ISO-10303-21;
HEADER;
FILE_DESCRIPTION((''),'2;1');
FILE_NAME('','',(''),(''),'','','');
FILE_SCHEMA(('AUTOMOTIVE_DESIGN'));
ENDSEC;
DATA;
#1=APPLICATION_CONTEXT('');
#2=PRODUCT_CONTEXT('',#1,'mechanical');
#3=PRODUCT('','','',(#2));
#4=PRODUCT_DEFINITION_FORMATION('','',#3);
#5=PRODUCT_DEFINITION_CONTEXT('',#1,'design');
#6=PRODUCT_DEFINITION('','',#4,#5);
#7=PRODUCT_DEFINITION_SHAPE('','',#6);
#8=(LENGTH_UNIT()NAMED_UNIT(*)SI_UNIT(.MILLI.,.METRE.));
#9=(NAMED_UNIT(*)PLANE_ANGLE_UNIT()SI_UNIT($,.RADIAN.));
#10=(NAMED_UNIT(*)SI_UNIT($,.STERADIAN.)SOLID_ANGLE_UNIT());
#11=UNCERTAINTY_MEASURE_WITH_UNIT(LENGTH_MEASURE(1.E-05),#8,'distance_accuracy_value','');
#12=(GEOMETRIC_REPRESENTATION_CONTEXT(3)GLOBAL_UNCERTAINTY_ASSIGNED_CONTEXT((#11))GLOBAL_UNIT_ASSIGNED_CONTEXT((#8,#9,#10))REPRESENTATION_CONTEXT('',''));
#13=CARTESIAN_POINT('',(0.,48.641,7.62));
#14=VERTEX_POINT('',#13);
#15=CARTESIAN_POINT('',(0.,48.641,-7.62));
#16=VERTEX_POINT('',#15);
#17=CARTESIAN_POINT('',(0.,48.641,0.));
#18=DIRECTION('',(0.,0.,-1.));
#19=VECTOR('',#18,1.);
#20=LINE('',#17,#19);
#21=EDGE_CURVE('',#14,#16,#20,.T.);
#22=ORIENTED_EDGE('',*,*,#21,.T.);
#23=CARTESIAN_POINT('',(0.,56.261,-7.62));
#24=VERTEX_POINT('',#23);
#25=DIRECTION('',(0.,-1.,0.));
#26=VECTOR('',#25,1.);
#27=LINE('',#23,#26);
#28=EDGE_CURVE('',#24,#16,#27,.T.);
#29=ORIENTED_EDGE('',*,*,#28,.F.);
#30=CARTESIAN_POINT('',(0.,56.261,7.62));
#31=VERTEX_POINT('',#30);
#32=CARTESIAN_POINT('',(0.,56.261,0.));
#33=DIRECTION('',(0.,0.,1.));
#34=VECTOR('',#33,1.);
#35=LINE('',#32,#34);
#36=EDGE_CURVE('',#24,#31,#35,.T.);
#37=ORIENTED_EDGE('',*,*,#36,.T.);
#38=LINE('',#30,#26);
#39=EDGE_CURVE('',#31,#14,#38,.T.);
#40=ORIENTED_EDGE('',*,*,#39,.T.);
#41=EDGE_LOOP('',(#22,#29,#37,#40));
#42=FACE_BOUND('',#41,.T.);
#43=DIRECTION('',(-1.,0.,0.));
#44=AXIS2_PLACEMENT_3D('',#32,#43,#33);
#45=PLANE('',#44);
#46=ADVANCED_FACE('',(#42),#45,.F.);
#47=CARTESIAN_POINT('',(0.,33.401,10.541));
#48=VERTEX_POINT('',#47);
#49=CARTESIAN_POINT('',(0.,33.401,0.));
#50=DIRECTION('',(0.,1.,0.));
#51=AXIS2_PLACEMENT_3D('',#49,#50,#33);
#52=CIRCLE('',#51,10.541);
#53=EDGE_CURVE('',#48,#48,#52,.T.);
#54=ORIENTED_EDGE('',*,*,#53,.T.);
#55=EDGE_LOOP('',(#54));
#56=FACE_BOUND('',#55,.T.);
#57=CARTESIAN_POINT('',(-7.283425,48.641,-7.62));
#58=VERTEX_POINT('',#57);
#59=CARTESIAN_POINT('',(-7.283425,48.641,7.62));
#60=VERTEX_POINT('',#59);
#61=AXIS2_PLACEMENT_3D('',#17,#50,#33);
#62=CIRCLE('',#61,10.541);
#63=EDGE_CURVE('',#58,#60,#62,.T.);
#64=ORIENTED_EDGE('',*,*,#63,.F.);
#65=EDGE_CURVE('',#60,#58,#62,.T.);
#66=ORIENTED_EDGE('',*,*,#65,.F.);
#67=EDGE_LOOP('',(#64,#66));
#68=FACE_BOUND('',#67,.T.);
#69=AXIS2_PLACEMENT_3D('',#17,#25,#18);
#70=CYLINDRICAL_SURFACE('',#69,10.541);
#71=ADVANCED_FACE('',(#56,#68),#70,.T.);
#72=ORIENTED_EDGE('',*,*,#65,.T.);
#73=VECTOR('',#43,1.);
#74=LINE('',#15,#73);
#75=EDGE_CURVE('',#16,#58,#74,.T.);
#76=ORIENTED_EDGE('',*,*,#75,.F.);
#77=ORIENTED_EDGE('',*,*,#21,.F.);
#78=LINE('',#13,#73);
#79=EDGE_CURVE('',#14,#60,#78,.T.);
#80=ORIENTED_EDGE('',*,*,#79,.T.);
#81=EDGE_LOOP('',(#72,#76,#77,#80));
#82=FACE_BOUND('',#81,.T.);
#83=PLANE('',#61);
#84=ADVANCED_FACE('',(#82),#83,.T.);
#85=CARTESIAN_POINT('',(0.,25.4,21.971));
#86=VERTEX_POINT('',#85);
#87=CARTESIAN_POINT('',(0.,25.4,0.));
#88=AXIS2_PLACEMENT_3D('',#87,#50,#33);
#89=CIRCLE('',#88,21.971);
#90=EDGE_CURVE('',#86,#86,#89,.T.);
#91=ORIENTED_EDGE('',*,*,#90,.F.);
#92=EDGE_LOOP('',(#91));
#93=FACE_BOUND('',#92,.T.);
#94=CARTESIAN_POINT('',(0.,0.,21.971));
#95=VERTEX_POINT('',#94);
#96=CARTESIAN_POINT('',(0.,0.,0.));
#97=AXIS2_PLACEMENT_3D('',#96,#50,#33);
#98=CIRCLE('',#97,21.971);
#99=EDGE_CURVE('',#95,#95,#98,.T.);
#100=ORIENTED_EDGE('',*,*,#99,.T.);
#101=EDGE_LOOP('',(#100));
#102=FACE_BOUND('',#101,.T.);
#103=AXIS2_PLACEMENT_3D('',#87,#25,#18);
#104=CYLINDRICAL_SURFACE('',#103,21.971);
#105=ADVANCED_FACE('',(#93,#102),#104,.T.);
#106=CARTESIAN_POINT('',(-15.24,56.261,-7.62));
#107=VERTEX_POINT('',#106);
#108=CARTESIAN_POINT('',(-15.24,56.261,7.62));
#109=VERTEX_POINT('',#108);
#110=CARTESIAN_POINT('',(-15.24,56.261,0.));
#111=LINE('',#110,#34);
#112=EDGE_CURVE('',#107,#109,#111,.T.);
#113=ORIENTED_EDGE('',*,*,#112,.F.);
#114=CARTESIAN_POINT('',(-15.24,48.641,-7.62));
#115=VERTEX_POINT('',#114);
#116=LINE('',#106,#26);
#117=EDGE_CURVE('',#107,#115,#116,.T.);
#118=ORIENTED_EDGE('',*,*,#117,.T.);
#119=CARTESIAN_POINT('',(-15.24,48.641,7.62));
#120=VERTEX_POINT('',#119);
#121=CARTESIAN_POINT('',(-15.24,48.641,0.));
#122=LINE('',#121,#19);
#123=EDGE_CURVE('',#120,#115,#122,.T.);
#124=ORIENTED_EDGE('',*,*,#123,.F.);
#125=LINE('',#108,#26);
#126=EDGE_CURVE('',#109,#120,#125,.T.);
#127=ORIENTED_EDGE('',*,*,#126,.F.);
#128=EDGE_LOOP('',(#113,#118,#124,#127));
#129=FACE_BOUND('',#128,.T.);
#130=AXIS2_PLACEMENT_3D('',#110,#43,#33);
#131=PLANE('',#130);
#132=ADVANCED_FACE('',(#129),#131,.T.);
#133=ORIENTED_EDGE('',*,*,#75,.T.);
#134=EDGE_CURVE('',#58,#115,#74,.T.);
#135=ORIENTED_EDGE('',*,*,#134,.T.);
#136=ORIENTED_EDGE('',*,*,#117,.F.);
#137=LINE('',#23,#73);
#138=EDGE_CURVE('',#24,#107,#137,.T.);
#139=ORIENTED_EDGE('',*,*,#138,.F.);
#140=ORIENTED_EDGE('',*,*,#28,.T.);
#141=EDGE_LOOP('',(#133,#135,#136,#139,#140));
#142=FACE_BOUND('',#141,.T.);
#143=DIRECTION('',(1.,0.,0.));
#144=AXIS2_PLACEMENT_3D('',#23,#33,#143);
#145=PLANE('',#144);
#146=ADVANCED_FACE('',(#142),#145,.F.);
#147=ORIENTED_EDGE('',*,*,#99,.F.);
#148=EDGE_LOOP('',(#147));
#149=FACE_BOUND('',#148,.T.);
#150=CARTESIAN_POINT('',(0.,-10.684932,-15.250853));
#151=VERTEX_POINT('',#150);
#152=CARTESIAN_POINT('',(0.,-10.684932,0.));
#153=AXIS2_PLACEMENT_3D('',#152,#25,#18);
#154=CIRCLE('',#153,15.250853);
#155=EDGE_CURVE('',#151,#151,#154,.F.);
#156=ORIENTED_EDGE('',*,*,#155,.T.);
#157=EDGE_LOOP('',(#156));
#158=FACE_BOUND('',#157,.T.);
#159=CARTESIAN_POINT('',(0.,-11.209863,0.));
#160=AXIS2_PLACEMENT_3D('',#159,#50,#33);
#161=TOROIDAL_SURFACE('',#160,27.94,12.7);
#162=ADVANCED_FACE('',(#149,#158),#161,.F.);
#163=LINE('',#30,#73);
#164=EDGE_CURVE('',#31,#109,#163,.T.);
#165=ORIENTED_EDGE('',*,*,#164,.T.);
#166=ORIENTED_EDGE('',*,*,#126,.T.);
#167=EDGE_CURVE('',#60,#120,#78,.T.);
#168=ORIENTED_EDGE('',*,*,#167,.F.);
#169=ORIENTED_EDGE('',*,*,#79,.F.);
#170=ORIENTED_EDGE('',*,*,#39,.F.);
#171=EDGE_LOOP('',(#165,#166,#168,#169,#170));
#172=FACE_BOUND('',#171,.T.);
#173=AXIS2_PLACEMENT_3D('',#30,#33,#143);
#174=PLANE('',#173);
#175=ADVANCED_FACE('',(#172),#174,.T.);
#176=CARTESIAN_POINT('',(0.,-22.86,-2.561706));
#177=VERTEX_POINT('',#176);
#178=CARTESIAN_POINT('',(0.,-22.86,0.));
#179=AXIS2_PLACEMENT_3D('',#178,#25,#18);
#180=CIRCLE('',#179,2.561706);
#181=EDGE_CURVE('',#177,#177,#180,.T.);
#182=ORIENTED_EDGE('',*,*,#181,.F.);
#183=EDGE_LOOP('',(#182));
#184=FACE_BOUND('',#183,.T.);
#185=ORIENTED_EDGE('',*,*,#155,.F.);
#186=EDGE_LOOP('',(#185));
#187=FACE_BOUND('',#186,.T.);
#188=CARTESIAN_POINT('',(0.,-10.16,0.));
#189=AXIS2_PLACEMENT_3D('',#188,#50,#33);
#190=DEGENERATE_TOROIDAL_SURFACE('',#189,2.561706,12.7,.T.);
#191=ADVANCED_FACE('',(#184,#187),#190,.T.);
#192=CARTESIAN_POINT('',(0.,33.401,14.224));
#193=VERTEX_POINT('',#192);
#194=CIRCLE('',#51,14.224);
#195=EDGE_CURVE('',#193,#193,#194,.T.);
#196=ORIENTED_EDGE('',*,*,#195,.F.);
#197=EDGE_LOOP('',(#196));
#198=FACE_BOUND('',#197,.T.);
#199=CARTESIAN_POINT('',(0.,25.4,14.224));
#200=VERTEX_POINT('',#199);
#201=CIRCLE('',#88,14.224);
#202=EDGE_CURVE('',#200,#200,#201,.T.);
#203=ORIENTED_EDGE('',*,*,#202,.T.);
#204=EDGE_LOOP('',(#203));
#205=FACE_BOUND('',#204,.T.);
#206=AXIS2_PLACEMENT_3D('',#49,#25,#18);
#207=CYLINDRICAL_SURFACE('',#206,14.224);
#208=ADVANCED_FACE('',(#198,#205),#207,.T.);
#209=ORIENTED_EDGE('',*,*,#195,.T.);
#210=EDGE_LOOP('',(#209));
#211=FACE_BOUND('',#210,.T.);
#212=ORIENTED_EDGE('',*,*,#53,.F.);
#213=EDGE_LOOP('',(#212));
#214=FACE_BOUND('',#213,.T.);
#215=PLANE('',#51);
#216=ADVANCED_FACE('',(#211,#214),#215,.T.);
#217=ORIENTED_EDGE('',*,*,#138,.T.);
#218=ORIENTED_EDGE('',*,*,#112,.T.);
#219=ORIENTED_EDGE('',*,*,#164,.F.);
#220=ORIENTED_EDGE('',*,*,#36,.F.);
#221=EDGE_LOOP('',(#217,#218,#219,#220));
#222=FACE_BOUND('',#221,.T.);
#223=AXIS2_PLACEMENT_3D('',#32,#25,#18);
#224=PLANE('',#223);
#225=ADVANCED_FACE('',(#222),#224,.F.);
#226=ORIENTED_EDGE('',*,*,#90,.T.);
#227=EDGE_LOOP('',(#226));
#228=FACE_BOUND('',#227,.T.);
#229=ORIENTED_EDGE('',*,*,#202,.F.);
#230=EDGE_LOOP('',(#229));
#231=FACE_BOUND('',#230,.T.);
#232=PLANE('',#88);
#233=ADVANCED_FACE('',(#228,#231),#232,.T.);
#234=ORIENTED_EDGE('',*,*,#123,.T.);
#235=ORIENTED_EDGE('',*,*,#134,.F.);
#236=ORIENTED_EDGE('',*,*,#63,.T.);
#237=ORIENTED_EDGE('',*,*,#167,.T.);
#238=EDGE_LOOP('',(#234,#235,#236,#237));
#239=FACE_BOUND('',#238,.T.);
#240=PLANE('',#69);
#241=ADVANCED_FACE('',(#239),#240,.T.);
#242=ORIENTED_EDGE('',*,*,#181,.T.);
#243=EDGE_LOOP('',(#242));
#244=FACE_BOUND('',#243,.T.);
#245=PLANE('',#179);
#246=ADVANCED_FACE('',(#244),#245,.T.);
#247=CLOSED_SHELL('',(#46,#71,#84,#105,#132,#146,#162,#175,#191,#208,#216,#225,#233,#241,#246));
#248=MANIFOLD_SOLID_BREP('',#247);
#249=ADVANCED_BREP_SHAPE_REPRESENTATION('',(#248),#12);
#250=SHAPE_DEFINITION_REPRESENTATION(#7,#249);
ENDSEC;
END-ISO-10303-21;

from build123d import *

# Parameters (mm, degrees)
SKETCH1_R           = 21.971
BOSS_EXTRUDE1_DEPTH = 25.4
SKETCH2_R           = 14.224
BOSS_EXTRUDE2_DEPTH = 8.001
SKETCH3_R           = 10.541
BOSS_EXTRUDE3_DEPTH = 15.24
BOSS_EXTRUDE4_DEPTH = 7.62
SKETCH5_R           = 15.24
BOSS_EXTRUDE5_DEPTH = 22.86
FILLET1_R           = 12.7
FILLET2_R           = 12.7


with BuildPart() as part:
    # Sketch1 → Boss-Extrude1 (new body)
    with BuildSketch(Plane(origin=(0, 0, 0), x_dir=(1, 0, 0), z_dir=(0, 1, 0))):
        with Locations(Location((0, 0, 0), (0, 0, 270))):
            Circle(SKETCH1_R)
    extrude(amount=BOSS_EXTRUDE1_DEPTH)

    # Sketch2 → Boss-Extrude2 (add)
    with BuildSketch(Plane(origin=(0, 25.4, 0), x_dir=(1, 0, 0), z_dir=(0, 1, 0))):
        with Locations(Location((0, 0, 0), (0, 0, 270))):
            Circle(SKETCH2_R)
    extrude(amount=BOSS_EXTRUDE2_DEPTH)

    # Sketch3 → Boss-Extrude3 (add)
    with BuildSketch(Plane(origin=(0, 33.401, 0), x_dir=(1, 0, 0), z_dir=(0, 1, 0))):
        with Locations(Location((0, 0, 0), (0, 0, 90))):
            Circle(SKETCH3_R)
    extrude(amount=BOSS_EXTRUDE3_DEPTH)

    # Sketch4 → Boss-Extrude4 (add)
    with BuildSketch(Plane(origin=(0, 48.641, 0), x_dir=(1, 0, 0), z_dir=(0, 1, 0))):
        Polygon((0, 0), (0, 7.62), (-15.24, 7.62), (-15.24, 0), (-15.24, -7.62), (0, -7.62), align=None)
    extrude(amount=BOSS_EXTRUDE4_DEPTH)

    # Sketch5 → Boss-Extrude5 (add)
    with BuildSketch(Plane.XZ):
        with Locations(Location((0, 0, 0), (0, 0, 90))):
            Circle(SKETCH5_R)
    extrude(amount=BOSS_EXTRUDE5_DEPTH)

    # Fillet1
    # the kernel refuses this fillet: 12.7 mm, written as the material it adds along each edge
    with BuildSketch(Plane(origin=(0, 0, 0), x_dir=(0, 0, 1), z_dir=(1, 0, 0))) as fillet1_piece_1:
        with BuildLine():
            CenterArc((27.94, 11.209863469), FILLET1_R, 180, 61.965703465)
            Line((15.24, 11.209863469), (14.986, 11.209863469))
            Line((14.986, 11.209863469), (14.986, 0))
            Line((14.986, 0), (15.24, -0.254))
            ThreePointArc((15.24, -0.254), (18.6055, -0.254), (21.85162, -0.224197269))
            Line((21.85162, -0.224197269), (21.971, 0))
        make_face()
    revolve(axis=Axis((0, 0, 0), (0, -1, 0)))

    # Fillet2
    fillet2_edges = [part.edges().sort_by_distance(p)[0] for p in [
        (0, -22.86, -15.24),
    ]]
    fillet(fillet2_edges, radius=FILLET2_R)


solid = part.part
